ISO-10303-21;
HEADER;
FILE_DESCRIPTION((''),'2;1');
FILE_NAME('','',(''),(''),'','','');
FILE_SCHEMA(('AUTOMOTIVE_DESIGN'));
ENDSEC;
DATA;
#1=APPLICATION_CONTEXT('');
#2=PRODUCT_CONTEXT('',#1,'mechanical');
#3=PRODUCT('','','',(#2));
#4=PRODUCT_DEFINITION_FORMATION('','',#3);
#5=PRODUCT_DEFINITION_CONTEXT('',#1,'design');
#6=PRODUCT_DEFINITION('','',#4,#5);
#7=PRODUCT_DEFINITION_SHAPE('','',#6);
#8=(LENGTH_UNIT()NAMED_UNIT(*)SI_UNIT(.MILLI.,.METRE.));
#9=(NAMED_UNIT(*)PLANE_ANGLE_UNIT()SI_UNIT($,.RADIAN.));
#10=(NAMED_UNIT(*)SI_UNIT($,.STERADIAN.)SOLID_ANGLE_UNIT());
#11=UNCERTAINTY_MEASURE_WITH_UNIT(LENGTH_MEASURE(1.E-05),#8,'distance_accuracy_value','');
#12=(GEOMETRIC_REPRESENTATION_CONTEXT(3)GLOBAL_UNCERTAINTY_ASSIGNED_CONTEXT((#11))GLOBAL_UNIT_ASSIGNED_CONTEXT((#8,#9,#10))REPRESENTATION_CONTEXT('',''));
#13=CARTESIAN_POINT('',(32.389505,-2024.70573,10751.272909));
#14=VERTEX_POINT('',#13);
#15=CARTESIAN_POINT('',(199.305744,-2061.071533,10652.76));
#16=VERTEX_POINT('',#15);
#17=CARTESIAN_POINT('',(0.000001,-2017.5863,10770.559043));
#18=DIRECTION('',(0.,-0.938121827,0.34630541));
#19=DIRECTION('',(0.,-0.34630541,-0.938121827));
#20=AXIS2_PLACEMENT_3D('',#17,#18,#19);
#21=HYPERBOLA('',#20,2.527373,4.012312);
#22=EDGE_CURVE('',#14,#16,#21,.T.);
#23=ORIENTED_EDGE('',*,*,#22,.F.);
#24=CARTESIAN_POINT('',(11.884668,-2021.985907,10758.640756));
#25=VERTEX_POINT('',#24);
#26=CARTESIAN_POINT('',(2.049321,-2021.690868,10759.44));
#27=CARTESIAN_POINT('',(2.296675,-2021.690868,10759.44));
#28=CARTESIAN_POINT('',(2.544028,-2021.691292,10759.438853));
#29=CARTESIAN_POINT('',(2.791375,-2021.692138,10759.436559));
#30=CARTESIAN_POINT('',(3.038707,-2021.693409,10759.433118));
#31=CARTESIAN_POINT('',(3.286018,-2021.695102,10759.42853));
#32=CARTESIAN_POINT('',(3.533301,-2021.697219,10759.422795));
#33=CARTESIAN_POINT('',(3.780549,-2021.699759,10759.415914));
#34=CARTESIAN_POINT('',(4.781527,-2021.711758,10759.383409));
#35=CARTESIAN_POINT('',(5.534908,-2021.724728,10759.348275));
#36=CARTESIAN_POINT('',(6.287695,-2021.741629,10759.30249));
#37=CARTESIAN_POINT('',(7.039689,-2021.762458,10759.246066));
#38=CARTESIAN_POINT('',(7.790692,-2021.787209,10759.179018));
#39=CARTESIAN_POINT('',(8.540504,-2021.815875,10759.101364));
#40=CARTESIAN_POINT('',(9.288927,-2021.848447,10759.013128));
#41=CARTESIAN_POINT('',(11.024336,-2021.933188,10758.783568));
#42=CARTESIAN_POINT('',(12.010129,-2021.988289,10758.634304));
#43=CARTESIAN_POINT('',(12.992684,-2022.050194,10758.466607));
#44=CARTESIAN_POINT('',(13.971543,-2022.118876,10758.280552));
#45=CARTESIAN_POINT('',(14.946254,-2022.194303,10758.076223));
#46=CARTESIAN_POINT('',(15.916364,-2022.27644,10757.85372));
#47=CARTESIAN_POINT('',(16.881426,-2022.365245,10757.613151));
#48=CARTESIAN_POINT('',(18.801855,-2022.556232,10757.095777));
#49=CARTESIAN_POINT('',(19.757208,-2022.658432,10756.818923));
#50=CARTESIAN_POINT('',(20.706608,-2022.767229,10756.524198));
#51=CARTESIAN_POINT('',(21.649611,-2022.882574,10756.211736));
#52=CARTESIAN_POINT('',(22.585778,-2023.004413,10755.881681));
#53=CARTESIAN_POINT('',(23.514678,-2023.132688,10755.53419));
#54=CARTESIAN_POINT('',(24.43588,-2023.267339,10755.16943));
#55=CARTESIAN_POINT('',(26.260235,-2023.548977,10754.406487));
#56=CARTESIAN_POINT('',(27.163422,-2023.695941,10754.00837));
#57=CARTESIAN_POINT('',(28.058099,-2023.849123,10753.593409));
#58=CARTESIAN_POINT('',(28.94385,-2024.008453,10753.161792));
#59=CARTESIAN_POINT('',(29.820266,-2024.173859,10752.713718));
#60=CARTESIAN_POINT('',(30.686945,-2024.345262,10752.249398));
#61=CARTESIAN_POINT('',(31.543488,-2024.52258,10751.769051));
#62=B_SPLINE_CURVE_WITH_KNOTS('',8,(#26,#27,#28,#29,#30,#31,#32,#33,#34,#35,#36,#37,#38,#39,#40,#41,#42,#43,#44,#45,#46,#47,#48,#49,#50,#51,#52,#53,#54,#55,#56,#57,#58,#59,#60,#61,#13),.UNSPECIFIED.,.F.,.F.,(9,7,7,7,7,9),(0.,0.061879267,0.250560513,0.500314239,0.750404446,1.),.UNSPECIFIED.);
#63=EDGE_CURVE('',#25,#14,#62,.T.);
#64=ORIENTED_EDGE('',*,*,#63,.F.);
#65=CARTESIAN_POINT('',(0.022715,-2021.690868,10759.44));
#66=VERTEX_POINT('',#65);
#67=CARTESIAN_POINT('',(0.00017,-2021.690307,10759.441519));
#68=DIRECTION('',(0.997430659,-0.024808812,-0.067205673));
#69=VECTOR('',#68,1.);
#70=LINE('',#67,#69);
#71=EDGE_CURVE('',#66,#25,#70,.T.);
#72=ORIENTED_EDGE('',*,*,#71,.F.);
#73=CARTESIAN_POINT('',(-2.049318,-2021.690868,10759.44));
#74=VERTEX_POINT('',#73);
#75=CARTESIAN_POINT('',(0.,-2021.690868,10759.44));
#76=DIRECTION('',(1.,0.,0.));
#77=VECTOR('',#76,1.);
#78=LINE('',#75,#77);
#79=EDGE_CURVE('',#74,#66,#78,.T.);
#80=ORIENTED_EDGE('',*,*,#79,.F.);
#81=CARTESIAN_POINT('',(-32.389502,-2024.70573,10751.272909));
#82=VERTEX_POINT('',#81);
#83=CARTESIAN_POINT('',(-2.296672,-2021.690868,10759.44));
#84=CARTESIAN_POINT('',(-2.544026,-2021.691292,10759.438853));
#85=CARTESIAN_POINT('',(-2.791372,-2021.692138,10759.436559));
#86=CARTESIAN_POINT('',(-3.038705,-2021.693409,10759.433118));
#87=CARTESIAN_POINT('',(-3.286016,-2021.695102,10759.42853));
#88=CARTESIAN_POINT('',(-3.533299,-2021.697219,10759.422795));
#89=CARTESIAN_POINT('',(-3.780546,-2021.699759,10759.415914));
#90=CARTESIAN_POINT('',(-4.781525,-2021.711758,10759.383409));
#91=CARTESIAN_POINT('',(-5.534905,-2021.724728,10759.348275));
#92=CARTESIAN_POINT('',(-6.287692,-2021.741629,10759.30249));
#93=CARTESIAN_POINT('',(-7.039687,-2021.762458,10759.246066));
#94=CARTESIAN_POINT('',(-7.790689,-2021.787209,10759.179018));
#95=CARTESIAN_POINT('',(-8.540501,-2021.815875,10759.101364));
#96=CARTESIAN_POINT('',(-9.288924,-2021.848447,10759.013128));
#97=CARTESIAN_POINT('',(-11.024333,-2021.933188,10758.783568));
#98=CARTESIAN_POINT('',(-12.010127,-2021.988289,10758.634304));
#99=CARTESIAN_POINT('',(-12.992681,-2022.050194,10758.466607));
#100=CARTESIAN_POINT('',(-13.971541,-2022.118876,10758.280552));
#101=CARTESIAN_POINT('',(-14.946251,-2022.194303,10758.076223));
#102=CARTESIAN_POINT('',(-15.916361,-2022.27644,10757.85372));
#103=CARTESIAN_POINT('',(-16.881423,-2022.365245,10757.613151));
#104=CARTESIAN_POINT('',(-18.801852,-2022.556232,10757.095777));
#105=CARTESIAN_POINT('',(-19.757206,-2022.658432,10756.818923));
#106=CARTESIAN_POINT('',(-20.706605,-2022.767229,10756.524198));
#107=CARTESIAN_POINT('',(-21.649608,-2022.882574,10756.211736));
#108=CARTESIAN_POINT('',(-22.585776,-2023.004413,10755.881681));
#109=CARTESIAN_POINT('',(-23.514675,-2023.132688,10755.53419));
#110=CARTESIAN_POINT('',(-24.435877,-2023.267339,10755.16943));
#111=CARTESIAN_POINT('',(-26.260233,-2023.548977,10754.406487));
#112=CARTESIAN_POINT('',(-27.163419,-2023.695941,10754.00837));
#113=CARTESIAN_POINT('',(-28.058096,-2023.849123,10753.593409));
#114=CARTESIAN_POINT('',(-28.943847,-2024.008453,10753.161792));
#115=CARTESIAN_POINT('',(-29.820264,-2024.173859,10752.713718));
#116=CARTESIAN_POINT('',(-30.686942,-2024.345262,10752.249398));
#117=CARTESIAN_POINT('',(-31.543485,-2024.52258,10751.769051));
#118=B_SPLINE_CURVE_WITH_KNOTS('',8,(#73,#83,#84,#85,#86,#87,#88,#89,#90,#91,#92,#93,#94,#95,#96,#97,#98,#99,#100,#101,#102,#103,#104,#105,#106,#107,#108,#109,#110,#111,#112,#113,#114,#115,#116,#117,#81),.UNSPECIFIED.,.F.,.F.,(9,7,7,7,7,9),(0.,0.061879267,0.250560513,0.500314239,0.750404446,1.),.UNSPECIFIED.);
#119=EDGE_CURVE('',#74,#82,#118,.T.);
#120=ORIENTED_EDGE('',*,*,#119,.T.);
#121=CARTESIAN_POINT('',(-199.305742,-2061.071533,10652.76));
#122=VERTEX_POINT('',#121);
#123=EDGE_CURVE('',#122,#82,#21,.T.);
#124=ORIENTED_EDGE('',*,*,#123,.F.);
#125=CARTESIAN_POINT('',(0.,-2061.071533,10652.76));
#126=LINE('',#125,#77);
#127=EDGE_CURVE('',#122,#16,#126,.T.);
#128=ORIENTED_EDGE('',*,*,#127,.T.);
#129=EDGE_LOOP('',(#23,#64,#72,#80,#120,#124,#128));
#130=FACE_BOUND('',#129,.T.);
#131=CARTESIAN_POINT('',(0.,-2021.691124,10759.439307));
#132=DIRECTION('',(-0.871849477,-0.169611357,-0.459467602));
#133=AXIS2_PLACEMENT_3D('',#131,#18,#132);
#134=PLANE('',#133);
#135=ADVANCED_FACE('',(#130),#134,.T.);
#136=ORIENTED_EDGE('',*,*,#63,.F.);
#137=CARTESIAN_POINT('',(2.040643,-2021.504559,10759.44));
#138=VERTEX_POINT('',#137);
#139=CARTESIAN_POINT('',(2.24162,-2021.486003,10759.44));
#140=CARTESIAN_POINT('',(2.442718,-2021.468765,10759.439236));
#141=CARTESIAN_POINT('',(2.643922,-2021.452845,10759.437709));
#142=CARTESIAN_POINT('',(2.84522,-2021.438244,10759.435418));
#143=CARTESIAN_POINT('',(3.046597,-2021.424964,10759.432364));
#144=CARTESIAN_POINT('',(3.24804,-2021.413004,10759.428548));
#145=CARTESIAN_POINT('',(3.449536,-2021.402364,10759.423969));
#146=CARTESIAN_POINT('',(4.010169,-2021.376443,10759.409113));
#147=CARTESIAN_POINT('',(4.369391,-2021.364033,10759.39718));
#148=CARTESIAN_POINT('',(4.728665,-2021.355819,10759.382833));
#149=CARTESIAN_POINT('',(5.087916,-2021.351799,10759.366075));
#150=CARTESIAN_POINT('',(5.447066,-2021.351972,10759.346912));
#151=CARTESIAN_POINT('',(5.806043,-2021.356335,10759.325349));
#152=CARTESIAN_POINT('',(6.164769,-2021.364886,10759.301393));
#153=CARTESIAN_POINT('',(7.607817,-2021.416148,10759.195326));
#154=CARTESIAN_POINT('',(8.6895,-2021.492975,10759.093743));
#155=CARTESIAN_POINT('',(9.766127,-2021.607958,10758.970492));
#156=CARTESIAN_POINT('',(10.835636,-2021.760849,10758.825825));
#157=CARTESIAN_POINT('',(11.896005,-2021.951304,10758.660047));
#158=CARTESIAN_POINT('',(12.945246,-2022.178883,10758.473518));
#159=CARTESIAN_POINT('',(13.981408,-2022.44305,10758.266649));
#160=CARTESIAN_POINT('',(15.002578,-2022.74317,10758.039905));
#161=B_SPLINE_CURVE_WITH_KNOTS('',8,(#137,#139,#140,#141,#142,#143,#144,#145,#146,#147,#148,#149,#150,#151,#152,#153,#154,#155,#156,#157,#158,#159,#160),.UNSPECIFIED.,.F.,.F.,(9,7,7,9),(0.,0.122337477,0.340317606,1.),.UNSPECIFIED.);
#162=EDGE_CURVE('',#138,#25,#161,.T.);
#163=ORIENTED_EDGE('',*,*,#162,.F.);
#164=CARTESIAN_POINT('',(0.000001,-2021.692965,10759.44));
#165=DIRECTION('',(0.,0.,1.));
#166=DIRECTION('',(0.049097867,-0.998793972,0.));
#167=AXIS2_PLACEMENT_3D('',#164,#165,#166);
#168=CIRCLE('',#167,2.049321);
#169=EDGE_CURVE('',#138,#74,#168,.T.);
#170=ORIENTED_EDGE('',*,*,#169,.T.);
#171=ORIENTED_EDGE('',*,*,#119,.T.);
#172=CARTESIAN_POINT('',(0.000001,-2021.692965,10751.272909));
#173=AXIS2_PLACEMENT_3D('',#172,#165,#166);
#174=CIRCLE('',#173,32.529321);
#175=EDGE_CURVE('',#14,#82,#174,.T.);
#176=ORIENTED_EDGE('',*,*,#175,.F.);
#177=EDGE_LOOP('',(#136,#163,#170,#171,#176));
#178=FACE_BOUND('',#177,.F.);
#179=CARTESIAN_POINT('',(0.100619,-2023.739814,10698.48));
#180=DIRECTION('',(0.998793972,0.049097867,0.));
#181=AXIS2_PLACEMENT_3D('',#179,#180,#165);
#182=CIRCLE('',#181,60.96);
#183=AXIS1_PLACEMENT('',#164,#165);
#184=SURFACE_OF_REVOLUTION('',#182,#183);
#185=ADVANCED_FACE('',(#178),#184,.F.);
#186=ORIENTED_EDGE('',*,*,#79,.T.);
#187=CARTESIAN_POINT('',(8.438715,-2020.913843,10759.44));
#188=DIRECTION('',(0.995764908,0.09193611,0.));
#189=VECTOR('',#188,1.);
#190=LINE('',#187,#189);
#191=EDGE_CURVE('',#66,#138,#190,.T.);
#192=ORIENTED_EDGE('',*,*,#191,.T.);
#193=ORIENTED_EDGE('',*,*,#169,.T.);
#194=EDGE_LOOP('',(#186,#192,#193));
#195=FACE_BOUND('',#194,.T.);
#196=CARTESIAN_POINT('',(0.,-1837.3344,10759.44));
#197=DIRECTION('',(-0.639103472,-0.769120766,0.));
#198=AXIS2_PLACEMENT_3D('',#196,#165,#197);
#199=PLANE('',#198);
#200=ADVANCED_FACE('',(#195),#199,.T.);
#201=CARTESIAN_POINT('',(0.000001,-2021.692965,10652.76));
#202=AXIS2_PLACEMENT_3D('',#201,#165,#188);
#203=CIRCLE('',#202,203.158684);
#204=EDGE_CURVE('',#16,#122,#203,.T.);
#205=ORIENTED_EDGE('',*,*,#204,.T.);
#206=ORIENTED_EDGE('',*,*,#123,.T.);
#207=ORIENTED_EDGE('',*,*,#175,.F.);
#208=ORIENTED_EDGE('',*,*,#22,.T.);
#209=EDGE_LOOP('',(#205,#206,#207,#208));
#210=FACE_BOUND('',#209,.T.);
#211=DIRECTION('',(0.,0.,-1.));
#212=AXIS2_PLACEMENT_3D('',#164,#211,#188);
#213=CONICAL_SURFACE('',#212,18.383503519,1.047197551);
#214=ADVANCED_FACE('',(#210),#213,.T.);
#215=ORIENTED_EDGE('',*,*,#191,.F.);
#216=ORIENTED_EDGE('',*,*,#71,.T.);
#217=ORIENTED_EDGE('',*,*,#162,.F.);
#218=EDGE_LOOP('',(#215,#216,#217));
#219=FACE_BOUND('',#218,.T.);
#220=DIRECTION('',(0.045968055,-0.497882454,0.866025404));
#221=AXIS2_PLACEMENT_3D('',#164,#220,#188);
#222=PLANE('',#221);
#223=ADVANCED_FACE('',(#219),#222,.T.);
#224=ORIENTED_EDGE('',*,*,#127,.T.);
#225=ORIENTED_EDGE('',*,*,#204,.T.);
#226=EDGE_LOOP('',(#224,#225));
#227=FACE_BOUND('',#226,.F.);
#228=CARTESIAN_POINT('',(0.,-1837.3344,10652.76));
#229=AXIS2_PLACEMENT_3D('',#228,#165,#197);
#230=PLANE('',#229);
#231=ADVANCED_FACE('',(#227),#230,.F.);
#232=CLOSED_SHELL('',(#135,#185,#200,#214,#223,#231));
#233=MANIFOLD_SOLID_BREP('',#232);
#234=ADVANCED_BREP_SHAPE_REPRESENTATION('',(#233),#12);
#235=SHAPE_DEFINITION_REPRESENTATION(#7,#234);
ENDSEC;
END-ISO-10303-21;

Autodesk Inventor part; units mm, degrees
ref_plane "YZ Plane" through (0, 0, 0) normal (1, 0, 0) x (0, 1, 0)
ref_plane "Work Plane8" through (0, -1837.3344, 10759.44) normal (0, 0, 1) x (-0.6391035, -0.7691208, 0)
sketch "Sketch14" plane through (0, -1837.3344, 10759.44) normal (0, 0, 1) x (-0.6391035, -0.7691208, 0)
  arc A0 (51.9231, 278.7941) -> (283.588, 0) centre (141.794, 117.8242) ccw projected
  arc A1 (128.7949, 130.8233) -> (154.7931, 104.8251) centre (141.794, 117.8242) ccw
  line L0 (141.794, 117.8242) -> (128.7949, 130.8233)
  line L1 (128.7949, 130.8233) -> (154.7931, 104.8251)
  point P0 (-1413.132, -1174.2468)
extrude "Extrusion9" add sketch "Sketch14" against normal blind 106.68 draft 60
ref_plane "Work Plane9" through (0, -2021.693, 10759.44) normal (0, -0.9381218, 0.3463054) x (-0.8718495, -0.1696114, -0.4594676)
sketch "Sketch15" plane through (0, -2021.693, 10759.44) normal (0, -0.9381218, 0.3463054) x (-0.8718495, -0.1696114, -0.4594676)
  line L0 (-172.5198, -77.543) -> (270.8607, -77.543)
  line L1 (270.8607, -77.543) -> (270.8607, 243.8061)
  line L2 (270.8607, 243.8061) -> (-172.5198, 243.8061)
  line L3 (-172.5198, 243.8061) -> (-172.5198, -77.543)
  point P0 (4600.712, 8189.7549)
extrude "Extrusion10" cut sketch "Sketch15" along normal blind 304.8
fillet "Fillet5" radius 60.96 1 edges at (-0.8449, -2003.3289, 10759.44)
properties part number "nose" material "Steel, Mild"
